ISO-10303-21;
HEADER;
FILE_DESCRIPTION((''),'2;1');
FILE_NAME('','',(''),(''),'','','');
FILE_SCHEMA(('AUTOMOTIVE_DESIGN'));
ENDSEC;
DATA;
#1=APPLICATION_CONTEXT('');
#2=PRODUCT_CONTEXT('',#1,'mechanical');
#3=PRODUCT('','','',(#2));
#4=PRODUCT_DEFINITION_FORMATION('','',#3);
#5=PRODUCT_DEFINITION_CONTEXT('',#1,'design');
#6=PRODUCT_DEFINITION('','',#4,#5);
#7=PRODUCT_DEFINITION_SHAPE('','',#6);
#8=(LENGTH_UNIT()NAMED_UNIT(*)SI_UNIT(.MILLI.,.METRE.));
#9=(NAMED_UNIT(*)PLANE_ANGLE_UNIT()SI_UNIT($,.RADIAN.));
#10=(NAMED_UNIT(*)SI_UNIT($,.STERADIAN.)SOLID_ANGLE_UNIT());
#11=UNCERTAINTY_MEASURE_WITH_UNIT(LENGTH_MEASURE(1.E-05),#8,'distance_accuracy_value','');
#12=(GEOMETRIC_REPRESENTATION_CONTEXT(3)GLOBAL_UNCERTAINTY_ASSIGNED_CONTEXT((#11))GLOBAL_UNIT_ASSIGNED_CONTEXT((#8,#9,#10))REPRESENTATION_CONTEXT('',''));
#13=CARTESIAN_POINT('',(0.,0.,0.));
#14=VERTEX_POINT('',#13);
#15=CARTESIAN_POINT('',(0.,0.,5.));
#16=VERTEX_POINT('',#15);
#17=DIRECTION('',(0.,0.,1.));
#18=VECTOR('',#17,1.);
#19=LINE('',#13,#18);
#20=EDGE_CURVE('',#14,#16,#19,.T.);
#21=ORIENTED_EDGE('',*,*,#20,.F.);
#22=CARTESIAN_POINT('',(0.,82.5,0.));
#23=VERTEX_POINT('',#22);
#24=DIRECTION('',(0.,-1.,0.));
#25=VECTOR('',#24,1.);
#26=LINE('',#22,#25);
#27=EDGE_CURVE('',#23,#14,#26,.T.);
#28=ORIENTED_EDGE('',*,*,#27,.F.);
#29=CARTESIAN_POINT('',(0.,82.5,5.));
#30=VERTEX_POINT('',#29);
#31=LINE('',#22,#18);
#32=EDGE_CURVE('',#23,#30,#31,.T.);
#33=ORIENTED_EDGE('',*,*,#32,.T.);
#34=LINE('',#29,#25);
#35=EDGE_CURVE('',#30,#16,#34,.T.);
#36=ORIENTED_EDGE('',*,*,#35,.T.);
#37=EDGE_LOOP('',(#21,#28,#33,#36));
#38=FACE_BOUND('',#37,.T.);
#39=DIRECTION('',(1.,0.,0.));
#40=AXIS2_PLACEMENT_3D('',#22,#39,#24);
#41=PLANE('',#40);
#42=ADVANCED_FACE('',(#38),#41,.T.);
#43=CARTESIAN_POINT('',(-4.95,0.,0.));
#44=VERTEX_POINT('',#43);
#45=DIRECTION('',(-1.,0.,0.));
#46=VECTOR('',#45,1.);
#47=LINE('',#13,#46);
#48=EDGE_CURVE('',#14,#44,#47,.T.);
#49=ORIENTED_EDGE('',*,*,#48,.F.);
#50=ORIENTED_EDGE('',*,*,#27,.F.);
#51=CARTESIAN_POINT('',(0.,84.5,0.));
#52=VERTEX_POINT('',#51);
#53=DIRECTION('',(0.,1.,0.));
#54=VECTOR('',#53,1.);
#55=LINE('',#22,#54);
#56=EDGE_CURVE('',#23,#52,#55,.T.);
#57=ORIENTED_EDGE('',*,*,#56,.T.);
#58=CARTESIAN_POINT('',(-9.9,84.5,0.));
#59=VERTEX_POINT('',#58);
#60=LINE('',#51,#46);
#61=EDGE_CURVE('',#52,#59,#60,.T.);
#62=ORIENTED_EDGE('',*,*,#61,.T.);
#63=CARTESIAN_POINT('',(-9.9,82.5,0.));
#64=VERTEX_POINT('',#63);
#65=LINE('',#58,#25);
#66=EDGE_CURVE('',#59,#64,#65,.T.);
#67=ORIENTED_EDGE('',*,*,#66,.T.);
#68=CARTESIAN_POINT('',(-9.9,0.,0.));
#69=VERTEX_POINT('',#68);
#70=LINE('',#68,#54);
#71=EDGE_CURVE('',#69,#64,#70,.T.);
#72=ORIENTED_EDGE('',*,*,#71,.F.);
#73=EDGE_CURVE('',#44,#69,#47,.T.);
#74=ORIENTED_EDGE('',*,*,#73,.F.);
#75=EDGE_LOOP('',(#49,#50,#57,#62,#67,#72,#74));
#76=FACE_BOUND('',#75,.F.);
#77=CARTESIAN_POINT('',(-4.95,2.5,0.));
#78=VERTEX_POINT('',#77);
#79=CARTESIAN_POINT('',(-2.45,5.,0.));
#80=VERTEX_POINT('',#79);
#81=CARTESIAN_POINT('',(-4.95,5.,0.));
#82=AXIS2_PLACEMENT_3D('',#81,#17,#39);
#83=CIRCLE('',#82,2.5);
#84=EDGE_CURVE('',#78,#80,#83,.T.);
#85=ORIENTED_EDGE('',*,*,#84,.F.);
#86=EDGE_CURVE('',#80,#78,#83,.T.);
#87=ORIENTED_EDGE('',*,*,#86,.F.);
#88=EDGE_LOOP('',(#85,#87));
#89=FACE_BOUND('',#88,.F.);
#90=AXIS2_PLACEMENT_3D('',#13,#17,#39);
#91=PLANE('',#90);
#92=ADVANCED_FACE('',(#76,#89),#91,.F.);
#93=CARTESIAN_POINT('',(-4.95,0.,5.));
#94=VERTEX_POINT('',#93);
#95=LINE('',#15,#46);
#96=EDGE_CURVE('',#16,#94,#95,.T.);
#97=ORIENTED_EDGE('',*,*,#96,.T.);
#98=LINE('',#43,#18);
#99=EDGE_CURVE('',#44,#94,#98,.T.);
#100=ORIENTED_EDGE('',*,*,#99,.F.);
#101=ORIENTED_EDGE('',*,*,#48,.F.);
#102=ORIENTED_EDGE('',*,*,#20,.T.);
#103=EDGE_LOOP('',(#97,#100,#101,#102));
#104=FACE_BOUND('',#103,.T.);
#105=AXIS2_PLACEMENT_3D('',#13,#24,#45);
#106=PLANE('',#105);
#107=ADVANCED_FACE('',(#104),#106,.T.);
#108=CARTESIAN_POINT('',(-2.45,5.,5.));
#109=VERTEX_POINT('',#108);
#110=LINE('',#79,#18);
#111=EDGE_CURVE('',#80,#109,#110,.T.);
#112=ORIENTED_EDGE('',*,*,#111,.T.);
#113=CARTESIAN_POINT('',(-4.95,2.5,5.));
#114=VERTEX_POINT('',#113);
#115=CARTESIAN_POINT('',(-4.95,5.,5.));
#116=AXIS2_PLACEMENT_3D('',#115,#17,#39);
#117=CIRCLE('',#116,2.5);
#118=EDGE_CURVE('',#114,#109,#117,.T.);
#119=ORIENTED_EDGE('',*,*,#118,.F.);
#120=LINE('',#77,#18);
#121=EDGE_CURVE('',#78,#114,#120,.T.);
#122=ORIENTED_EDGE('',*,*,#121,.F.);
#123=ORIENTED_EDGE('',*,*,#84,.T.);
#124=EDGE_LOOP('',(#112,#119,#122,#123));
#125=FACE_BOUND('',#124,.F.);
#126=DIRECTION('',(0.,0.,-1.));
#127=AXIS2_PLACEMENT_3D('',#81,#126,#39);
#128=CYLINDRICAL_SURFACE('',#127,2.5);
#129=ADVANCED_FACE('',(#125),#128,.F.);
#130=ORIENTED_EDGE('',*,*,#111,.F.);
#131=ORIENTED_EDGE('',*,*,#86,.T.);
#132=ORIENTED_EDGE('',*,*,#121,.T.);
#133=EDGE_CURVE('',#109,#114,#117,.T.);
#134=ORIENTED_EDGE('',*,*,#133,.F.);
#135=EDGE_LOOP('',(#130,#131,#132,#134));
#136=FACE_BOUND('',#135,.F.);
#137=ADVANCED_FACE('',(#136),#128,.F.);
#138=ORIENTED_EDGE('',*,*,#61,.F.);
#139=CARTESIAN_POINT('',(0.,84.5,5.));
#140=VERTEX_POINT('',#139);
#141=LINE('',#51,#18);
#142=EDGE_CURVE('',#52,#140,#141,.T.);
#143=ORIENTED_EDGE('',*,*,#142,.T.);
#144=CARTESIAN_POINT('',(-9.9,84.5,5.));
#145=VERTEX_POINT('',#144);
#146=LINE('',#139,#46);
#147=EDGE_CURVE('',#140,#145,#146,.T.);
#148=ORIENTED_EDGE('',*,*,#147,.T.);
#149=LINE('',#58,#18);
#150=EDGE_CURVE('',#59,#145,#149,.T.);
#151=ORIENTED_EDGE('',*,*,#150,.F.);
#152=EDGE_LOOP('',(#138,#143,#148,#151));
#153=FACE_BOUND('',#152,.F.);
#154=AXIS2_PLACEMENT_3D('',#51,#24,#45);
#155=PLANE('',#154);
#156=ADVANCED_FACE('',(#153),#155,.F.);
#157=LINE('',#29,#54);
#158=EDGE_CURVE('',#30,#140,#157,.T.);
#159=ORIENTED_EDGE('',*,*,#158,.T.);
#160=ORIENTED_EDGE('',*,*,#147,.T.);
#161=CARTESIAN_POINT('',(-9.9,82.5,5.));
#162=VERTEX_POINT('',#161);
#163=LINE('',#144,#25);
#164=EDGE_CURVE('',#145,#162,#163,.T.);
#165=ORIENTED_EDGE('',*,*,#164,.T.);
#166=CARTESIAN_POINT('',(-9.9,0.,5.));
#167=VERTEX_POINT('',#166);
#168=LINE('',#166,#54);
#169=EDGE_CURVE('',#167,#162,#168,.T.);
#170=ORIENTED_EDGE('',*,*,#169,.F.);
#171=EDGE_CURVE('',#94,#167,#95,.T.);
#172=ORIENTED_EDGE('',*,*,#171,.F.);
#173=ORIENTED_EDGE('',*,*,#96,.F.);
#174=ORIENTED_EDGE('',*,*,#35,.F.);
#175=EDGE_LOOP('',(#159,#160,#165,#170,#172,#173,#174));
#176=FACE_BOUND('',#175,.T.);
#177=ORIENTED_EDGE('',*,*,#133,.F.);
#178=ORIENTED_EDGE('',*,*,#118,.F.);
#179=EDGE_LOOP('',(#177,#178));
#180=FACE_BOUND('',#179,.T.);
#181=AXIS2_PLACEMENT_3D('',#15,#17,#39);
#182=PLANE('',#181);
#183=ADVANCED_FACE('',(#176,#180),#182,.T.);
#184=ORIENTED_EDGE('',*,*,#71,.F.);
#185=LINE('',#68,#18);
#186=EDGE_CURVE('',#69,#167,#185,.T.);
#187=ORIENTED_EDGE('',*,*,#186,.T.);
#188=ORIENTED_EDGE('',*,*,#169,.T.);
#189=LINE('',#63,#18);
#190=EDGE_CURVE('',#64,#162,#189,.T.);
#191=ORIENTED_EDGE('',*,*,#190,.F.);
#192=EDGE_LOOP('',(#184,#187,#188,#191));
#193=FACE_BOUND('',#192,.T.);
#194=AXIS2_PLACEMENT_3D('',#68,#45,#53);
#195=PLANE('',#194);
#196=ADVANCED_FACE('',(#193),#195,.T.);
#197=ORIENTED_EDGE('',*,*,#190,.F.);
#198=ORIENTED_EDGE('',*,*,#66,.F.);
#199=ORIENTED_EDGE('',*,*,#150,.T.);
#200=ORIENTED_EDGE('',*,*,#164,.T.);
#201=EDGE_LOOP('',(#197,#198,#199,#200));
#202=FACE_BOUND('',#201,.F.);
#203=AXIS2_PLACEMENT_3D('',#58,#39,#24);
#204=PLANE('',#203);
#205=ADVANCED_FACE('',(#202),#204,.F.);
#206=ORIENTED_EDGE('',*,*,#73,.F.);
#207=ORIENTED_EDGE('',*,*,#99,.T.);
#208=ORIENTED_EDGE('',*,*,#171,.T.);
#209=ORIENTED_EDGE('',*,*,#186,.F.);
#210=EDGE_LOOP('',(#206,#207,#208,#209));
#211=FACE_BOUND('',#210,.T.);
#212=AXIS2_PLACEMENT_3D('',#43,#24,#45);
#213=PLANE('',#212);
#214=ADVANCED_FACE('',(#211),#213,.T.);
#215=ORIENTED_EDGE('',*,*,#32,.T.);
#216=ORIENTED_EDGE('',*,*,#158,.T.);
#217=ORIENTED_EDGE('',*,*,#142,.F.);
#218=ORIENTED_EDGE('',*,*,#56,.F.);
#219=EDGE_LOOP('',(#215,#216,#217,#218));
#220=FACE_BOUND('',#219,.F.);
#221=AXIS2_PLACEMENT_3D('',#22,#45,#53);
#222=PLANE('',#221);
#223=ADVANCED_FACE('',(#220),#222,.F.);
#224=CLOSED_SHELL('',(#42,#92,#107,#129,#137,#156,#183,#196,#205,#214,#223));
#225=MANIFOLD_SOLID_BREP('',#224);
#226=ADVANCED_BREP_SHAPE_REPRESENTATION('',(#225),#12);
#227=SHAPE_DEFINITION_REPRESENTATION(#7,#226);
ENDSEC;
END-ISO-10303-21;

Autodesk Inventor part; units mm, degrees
ref_plane "YZ Plane" through (0, 0, 0) normal (1, 0, 0) x (0, 1, 0)
ref_plane "XZ Plane" through (0, 0, 0) normal (0, 1, 0) x (-1, 0, 0)
ref_plane "XY Plane" through (0, 0, 0) normal (0, 0, 1) x (1, 0, 0)
sketch "Sketch2" plane through (0, 0, 0) normal (0, 0, 1) x (1, 0, 0)
  line L0 (0, 0) -> (-9.9, 0)
  line L1 (-4.95, 0) -> (-4.95, 2.5)
  line L2 (-4.95, 0) -> (-2.45, 0) construction
  circle A0 centre (-4.95, 5) radius 2.5
  line L3 (-4.95, 7.5) -> (32.05, 7.5) construction
  line L4 (0, 0) -> (-9.9, 0)
  line L5 (0, 0) -> (-9.9, 0)
  line L6 (-4.95, 7.5) -> (66.05, 7.5) construction
  line L7 (-4.95, 7.5) -> (70.05, 7.5) construction
  line L8 (0, 0) -> (-9.9, 0)
  line L9 (-9.9, 0) -> (-9.9, 82.5)
  line L10 (0, 82.5) -> (0, 0)
  line L11 (0, 82.5) -> (0, 84.5)
  line L12 (0, 84.5) -> (-9.9, 84.5)
  line L13 (-9.9, 84.5) -> (-9.9, 82.5)
  dimension "d35" = 5
  dimension "d33" = 2.5
  dimension "d34" = 90
  dimension "d48" = 9.9
  dimension "d49" = 9.9
  dimension "d50" = 2
extrude "Extrusion6" add sketch "Sketch2" along normal blind 5
properties part number "Cube_Holder_SB_V1_(71mm)"
